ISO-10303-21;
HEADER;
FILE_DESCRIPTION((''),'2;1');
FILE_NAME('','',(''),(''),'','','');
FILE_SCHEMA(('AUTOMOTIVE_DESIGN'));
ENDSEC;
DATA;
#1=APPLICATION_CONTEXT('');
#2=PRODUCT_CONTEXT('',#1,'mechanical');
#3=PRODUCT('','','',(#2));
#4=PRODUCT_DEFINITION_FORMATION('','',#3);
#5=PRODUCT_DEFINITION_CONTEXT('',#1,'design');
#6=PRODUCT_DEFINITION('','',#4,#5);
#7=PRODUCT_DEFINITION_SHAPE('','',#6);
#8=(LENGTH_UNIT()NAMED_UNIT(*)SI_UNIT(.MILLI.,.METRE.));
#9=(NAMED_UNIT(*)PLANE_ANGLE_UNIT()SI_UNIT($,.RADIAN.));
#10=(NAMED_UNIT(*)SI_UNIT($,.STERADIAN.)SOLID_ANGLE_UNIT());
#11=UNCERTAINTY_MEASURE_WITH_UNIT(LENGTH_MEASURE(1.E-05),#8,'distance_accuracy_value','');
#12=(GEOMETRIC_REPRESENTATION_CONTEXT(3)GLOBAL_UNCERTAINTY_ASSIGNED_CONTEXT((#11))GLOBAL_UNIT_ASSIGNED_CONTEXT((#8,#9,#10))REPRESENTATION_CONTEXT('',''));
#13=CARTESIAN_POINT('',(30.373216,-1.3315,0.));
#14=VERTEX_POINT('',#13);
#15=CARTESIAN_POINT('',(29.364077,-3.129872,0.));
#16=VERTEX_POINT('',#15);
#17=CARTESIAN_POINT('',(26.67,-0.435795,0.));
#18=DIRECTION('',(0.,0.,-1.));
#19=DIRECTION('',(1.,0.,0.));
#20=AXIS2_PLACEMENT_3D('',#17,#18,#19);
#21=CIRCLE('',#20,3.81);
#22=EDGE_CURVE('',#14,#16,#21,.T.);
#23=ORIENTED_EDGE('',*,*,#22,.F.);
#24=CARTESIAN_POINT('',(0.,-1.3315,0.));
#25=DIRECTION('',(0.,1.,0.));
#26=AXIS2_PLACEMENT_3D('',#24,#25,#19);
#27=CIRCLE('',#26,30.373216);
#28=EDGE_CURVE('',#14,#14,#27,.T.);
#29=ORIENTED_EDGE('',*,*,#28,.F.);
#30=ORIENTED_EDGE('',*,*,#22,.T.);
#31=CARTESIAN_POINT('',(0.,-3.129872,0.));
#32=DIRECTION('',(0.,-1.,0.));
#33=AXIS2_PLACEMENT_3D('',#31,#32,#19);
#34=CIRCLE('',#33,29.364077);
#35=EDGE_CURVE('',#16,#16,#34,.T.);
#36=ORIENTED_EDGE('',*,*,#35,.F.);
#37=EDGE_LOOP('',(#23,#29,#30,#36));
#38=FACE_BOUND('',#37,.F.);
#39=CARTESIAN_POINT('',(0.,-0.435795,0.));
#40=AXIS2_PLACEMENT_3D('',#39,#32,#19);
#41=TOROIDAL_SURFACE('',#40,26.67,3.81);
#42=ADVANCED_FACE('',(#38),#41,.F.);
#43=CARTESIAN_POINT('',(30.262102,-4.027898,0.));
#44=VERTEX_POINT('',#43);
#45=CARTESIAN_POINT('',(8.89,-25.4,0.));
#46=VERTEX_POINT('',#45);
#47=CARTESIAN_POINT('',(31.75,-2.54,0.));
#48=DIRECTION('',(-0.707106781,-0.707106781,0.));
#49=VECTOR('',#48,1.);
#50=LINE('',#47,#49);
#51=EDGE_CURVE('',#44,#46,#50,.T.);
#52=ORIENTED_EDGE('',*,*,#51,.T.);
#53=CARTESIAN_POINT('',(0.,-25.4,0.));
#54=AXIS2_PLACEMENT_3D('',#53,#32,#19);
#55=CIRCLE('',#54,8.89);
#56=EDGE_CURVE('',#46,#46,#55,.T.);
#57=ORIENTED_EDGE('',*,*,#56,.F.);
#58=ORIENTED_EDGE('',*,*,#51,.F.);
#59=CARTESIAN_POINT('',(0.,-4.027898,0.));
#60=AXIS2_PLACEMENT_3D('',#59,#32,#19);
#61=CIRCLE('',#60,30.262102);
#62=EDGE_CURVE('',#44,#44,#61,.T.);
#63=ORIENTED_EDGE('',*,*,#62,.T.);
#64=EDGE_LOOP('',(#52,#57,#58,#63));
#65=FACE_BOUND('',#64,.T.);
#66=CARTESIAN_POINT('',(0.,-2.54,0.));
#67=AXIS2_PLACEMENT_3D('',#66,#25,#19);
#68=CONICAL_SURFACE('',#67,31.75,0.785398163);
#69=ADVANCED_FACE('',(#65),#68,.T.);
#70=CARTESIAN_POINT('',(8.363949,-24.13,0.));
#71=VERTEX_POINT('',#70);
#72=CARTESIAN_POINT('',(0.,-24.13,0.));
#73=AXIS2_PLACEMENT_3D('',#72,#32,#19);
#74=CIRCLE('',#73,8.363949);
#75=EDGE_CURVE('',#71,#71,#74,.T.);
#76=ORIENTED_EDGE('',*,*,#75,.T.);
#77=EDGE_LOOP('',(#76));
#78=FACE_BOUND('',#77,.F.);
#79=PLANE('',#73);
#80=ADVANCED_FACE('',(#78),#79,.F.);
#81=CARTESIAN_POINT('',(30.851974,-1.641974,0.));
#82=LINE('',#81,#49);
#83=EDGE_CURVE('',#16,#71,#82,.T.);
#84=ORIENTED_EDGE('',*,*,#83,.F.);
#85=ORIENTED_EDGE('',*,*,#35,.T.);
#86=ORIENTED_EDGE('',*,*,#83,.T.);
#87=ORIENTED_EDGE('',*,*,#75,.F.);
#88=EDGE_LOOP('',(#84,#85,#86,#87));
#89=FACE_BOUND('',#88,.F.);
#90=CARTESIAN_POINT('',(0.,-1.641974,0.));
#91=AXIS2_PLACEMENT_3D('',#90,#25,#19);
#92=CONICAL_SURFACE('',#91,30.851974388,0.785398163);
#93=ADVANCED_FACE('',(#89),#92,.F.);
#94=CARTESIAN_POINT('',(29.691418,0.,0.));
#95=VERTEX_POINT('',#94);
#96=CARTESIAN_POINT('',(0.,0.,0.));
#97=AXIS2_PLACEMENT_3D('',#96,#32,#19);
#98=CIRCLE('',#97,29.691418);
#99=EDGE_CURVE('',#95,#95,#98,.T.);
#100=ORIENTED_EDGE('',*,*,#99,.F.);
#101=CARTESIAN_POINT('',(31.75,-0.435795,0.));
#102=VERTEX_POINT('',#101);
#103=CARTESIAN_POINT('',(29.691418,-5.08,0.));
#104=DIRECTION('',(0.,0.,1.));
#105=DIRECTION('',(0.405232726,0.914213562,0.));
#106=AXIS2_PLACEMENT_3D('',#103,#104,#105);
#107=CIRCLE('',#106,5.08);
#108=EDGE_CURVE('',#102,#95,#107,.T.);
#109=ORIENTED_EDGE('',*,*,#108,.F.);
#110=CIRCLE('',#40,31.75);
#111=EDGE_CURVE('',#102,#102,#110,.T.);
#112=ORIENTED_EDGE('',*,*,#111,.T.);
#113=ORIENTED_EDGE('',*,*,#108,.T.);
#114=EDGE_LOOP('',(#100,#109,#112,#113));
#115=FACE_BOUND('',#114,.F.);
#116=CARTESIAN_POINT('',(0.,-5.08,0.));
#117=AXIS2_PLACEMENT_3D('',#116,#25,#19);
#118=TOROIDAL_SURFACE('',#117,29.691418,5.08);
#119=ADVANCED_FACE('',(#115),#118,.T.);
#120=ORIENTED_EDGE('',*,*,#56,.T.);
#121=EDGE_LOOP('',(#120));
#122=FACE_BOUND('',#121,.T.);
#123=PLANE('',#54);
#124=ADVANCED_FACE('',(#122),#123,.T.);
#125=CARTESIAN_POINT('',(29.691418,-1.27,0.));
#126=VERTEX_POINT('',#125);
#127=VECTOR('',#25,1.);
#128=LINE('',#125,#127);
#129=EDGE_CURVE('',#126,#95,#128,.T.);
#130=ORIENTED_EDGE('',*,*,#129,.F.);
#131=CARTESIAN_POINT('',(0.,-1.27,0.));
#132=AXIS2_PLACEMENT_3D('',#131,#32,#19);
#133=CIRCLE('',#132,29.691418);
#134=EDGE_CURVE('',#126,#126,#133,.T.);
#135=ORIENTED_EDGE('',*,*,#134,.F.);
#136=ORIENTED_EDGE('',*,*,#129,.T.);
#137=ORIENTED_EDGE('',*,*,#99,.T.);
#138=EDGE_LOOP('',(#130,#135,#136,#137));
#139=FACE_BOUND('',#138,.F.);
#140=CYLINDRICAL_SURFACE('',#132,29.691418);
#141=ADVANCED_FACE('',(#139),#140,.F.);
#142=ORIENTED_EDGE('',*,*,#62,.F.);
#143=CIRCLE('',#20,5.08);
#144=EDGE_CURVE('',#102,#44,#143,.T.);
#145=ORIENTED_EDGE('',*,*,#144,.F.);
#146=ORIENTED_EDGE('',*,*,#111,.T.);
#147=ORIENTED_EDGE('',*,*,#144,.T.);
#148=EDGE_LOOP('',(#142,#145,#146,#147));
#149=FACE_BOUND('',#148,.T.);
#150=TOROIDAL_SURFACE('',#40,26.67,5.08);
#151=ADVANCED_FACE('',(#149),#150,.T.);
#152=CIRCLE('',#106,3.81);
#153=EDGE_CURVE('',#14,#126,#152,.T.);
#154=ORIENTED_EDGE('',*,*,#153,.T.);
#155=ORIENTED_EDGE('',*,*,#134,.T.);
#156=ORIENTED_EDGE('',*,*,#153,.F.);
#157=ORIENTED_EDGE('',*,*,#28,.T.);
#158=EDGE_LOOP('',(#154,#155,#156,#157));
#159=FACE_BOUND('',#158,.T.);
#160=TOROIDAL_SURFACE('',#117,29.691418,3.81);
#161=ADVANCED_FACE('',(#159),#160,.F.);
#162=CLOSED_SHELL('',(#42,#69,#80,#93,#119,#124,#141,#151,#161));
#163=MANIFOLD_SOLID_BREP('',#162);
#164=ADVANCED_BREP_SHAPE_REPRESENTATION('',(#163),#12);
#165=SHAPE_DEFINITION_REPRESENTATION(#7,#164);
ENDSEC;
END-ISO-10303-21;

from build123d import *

# Parameters (mm, degrees)
F0_R     = 31.75
F1_DEPTH = 25.4
F2_SIZE  = 22.86
F5_T     = -1.27


# Not quite as in the source:
# - a fillet or chamfer that OpenCascade refuses, or shapes differently, is made with other operations: its cross-section is extruded or revolved along the edge and cut away or added
# - a feature of the source that left no trace in its solid (it failed there, or was rolled back) is left out
# - a shell that OpenCascade refuses in one call is made with other operations: the cavity is built on its own and cut out


with BuildPart() as f1:
    # F0 (on Front) → F1 (new body)
    with BuildSketch(Plane.XZ):
        Circle(F0_R)
    extrude(amount=F1_DEPTH)

    # F2
    f2_edges = [f1.edges().sort_by_distance(p)[0] for p in [
        (-31.75, -25.4, 0),
    ]]
    chamfer(f2_edges, length=F2_SIZE)

    # F4: fillet of radius 5.08 on 2 edges, made by hand

    # F4_s1 → F4_t2 (revolve, cut)
    with BuildSketch(Plane.XY):
        with BuildLine():
            ThreePointArc((31.75, -0.4357951031), (31.3633080252, -2.3798269396), (30.2621024484, -4.0278975516))
            Line((30.2621024484, -4.0278975516), (31.75, -2.54))
            Line((31.75, -2.54), (31.75, -0.4357951031))
        make_face()
    revolve(axis=Axis((0, -2.54, 0), (0, -1, 0)), mode=Mode.SUBTRACT)

    # F4_s3 → F4_t4 (revolve, cut)
    with BuildSketch(Plane.XY):
        with BuildLine():
            ThreePointArc((31.75, -0.4357951031), (30.7435201994, -0.1101428151), (29.691417751, 0))
            Line((29.691417751, 0), (31.75, 0))
            Line((31.75, 0), (31.75, -0.4357951031))
        make_face()
    revolve(axis=Axis((0, 0, 0), (0, -1, 0)), mode=Mode.SUBTRACT)

    # F5: a shell. OpenCascade refuses it in one call, so the cavity is built on its own and cut out:
    # the body offset inwards by the wall thickness, plus a prism from it out through each open face.
    f5_core = offset(f1.part, amount=F5_T, mode=Mode.PRIVATE)
    f5_exits = [f5_core.faces().sort_by_distance(p)[0] for p in [
        (0, -1.27, 0),
    ]]
    add(f5_core, mode=Mode.SUBTRACT)
    extrude(f5_exits, amount=-F5_T, mode=Mode.SUBTRACT)


solid = f1.part
